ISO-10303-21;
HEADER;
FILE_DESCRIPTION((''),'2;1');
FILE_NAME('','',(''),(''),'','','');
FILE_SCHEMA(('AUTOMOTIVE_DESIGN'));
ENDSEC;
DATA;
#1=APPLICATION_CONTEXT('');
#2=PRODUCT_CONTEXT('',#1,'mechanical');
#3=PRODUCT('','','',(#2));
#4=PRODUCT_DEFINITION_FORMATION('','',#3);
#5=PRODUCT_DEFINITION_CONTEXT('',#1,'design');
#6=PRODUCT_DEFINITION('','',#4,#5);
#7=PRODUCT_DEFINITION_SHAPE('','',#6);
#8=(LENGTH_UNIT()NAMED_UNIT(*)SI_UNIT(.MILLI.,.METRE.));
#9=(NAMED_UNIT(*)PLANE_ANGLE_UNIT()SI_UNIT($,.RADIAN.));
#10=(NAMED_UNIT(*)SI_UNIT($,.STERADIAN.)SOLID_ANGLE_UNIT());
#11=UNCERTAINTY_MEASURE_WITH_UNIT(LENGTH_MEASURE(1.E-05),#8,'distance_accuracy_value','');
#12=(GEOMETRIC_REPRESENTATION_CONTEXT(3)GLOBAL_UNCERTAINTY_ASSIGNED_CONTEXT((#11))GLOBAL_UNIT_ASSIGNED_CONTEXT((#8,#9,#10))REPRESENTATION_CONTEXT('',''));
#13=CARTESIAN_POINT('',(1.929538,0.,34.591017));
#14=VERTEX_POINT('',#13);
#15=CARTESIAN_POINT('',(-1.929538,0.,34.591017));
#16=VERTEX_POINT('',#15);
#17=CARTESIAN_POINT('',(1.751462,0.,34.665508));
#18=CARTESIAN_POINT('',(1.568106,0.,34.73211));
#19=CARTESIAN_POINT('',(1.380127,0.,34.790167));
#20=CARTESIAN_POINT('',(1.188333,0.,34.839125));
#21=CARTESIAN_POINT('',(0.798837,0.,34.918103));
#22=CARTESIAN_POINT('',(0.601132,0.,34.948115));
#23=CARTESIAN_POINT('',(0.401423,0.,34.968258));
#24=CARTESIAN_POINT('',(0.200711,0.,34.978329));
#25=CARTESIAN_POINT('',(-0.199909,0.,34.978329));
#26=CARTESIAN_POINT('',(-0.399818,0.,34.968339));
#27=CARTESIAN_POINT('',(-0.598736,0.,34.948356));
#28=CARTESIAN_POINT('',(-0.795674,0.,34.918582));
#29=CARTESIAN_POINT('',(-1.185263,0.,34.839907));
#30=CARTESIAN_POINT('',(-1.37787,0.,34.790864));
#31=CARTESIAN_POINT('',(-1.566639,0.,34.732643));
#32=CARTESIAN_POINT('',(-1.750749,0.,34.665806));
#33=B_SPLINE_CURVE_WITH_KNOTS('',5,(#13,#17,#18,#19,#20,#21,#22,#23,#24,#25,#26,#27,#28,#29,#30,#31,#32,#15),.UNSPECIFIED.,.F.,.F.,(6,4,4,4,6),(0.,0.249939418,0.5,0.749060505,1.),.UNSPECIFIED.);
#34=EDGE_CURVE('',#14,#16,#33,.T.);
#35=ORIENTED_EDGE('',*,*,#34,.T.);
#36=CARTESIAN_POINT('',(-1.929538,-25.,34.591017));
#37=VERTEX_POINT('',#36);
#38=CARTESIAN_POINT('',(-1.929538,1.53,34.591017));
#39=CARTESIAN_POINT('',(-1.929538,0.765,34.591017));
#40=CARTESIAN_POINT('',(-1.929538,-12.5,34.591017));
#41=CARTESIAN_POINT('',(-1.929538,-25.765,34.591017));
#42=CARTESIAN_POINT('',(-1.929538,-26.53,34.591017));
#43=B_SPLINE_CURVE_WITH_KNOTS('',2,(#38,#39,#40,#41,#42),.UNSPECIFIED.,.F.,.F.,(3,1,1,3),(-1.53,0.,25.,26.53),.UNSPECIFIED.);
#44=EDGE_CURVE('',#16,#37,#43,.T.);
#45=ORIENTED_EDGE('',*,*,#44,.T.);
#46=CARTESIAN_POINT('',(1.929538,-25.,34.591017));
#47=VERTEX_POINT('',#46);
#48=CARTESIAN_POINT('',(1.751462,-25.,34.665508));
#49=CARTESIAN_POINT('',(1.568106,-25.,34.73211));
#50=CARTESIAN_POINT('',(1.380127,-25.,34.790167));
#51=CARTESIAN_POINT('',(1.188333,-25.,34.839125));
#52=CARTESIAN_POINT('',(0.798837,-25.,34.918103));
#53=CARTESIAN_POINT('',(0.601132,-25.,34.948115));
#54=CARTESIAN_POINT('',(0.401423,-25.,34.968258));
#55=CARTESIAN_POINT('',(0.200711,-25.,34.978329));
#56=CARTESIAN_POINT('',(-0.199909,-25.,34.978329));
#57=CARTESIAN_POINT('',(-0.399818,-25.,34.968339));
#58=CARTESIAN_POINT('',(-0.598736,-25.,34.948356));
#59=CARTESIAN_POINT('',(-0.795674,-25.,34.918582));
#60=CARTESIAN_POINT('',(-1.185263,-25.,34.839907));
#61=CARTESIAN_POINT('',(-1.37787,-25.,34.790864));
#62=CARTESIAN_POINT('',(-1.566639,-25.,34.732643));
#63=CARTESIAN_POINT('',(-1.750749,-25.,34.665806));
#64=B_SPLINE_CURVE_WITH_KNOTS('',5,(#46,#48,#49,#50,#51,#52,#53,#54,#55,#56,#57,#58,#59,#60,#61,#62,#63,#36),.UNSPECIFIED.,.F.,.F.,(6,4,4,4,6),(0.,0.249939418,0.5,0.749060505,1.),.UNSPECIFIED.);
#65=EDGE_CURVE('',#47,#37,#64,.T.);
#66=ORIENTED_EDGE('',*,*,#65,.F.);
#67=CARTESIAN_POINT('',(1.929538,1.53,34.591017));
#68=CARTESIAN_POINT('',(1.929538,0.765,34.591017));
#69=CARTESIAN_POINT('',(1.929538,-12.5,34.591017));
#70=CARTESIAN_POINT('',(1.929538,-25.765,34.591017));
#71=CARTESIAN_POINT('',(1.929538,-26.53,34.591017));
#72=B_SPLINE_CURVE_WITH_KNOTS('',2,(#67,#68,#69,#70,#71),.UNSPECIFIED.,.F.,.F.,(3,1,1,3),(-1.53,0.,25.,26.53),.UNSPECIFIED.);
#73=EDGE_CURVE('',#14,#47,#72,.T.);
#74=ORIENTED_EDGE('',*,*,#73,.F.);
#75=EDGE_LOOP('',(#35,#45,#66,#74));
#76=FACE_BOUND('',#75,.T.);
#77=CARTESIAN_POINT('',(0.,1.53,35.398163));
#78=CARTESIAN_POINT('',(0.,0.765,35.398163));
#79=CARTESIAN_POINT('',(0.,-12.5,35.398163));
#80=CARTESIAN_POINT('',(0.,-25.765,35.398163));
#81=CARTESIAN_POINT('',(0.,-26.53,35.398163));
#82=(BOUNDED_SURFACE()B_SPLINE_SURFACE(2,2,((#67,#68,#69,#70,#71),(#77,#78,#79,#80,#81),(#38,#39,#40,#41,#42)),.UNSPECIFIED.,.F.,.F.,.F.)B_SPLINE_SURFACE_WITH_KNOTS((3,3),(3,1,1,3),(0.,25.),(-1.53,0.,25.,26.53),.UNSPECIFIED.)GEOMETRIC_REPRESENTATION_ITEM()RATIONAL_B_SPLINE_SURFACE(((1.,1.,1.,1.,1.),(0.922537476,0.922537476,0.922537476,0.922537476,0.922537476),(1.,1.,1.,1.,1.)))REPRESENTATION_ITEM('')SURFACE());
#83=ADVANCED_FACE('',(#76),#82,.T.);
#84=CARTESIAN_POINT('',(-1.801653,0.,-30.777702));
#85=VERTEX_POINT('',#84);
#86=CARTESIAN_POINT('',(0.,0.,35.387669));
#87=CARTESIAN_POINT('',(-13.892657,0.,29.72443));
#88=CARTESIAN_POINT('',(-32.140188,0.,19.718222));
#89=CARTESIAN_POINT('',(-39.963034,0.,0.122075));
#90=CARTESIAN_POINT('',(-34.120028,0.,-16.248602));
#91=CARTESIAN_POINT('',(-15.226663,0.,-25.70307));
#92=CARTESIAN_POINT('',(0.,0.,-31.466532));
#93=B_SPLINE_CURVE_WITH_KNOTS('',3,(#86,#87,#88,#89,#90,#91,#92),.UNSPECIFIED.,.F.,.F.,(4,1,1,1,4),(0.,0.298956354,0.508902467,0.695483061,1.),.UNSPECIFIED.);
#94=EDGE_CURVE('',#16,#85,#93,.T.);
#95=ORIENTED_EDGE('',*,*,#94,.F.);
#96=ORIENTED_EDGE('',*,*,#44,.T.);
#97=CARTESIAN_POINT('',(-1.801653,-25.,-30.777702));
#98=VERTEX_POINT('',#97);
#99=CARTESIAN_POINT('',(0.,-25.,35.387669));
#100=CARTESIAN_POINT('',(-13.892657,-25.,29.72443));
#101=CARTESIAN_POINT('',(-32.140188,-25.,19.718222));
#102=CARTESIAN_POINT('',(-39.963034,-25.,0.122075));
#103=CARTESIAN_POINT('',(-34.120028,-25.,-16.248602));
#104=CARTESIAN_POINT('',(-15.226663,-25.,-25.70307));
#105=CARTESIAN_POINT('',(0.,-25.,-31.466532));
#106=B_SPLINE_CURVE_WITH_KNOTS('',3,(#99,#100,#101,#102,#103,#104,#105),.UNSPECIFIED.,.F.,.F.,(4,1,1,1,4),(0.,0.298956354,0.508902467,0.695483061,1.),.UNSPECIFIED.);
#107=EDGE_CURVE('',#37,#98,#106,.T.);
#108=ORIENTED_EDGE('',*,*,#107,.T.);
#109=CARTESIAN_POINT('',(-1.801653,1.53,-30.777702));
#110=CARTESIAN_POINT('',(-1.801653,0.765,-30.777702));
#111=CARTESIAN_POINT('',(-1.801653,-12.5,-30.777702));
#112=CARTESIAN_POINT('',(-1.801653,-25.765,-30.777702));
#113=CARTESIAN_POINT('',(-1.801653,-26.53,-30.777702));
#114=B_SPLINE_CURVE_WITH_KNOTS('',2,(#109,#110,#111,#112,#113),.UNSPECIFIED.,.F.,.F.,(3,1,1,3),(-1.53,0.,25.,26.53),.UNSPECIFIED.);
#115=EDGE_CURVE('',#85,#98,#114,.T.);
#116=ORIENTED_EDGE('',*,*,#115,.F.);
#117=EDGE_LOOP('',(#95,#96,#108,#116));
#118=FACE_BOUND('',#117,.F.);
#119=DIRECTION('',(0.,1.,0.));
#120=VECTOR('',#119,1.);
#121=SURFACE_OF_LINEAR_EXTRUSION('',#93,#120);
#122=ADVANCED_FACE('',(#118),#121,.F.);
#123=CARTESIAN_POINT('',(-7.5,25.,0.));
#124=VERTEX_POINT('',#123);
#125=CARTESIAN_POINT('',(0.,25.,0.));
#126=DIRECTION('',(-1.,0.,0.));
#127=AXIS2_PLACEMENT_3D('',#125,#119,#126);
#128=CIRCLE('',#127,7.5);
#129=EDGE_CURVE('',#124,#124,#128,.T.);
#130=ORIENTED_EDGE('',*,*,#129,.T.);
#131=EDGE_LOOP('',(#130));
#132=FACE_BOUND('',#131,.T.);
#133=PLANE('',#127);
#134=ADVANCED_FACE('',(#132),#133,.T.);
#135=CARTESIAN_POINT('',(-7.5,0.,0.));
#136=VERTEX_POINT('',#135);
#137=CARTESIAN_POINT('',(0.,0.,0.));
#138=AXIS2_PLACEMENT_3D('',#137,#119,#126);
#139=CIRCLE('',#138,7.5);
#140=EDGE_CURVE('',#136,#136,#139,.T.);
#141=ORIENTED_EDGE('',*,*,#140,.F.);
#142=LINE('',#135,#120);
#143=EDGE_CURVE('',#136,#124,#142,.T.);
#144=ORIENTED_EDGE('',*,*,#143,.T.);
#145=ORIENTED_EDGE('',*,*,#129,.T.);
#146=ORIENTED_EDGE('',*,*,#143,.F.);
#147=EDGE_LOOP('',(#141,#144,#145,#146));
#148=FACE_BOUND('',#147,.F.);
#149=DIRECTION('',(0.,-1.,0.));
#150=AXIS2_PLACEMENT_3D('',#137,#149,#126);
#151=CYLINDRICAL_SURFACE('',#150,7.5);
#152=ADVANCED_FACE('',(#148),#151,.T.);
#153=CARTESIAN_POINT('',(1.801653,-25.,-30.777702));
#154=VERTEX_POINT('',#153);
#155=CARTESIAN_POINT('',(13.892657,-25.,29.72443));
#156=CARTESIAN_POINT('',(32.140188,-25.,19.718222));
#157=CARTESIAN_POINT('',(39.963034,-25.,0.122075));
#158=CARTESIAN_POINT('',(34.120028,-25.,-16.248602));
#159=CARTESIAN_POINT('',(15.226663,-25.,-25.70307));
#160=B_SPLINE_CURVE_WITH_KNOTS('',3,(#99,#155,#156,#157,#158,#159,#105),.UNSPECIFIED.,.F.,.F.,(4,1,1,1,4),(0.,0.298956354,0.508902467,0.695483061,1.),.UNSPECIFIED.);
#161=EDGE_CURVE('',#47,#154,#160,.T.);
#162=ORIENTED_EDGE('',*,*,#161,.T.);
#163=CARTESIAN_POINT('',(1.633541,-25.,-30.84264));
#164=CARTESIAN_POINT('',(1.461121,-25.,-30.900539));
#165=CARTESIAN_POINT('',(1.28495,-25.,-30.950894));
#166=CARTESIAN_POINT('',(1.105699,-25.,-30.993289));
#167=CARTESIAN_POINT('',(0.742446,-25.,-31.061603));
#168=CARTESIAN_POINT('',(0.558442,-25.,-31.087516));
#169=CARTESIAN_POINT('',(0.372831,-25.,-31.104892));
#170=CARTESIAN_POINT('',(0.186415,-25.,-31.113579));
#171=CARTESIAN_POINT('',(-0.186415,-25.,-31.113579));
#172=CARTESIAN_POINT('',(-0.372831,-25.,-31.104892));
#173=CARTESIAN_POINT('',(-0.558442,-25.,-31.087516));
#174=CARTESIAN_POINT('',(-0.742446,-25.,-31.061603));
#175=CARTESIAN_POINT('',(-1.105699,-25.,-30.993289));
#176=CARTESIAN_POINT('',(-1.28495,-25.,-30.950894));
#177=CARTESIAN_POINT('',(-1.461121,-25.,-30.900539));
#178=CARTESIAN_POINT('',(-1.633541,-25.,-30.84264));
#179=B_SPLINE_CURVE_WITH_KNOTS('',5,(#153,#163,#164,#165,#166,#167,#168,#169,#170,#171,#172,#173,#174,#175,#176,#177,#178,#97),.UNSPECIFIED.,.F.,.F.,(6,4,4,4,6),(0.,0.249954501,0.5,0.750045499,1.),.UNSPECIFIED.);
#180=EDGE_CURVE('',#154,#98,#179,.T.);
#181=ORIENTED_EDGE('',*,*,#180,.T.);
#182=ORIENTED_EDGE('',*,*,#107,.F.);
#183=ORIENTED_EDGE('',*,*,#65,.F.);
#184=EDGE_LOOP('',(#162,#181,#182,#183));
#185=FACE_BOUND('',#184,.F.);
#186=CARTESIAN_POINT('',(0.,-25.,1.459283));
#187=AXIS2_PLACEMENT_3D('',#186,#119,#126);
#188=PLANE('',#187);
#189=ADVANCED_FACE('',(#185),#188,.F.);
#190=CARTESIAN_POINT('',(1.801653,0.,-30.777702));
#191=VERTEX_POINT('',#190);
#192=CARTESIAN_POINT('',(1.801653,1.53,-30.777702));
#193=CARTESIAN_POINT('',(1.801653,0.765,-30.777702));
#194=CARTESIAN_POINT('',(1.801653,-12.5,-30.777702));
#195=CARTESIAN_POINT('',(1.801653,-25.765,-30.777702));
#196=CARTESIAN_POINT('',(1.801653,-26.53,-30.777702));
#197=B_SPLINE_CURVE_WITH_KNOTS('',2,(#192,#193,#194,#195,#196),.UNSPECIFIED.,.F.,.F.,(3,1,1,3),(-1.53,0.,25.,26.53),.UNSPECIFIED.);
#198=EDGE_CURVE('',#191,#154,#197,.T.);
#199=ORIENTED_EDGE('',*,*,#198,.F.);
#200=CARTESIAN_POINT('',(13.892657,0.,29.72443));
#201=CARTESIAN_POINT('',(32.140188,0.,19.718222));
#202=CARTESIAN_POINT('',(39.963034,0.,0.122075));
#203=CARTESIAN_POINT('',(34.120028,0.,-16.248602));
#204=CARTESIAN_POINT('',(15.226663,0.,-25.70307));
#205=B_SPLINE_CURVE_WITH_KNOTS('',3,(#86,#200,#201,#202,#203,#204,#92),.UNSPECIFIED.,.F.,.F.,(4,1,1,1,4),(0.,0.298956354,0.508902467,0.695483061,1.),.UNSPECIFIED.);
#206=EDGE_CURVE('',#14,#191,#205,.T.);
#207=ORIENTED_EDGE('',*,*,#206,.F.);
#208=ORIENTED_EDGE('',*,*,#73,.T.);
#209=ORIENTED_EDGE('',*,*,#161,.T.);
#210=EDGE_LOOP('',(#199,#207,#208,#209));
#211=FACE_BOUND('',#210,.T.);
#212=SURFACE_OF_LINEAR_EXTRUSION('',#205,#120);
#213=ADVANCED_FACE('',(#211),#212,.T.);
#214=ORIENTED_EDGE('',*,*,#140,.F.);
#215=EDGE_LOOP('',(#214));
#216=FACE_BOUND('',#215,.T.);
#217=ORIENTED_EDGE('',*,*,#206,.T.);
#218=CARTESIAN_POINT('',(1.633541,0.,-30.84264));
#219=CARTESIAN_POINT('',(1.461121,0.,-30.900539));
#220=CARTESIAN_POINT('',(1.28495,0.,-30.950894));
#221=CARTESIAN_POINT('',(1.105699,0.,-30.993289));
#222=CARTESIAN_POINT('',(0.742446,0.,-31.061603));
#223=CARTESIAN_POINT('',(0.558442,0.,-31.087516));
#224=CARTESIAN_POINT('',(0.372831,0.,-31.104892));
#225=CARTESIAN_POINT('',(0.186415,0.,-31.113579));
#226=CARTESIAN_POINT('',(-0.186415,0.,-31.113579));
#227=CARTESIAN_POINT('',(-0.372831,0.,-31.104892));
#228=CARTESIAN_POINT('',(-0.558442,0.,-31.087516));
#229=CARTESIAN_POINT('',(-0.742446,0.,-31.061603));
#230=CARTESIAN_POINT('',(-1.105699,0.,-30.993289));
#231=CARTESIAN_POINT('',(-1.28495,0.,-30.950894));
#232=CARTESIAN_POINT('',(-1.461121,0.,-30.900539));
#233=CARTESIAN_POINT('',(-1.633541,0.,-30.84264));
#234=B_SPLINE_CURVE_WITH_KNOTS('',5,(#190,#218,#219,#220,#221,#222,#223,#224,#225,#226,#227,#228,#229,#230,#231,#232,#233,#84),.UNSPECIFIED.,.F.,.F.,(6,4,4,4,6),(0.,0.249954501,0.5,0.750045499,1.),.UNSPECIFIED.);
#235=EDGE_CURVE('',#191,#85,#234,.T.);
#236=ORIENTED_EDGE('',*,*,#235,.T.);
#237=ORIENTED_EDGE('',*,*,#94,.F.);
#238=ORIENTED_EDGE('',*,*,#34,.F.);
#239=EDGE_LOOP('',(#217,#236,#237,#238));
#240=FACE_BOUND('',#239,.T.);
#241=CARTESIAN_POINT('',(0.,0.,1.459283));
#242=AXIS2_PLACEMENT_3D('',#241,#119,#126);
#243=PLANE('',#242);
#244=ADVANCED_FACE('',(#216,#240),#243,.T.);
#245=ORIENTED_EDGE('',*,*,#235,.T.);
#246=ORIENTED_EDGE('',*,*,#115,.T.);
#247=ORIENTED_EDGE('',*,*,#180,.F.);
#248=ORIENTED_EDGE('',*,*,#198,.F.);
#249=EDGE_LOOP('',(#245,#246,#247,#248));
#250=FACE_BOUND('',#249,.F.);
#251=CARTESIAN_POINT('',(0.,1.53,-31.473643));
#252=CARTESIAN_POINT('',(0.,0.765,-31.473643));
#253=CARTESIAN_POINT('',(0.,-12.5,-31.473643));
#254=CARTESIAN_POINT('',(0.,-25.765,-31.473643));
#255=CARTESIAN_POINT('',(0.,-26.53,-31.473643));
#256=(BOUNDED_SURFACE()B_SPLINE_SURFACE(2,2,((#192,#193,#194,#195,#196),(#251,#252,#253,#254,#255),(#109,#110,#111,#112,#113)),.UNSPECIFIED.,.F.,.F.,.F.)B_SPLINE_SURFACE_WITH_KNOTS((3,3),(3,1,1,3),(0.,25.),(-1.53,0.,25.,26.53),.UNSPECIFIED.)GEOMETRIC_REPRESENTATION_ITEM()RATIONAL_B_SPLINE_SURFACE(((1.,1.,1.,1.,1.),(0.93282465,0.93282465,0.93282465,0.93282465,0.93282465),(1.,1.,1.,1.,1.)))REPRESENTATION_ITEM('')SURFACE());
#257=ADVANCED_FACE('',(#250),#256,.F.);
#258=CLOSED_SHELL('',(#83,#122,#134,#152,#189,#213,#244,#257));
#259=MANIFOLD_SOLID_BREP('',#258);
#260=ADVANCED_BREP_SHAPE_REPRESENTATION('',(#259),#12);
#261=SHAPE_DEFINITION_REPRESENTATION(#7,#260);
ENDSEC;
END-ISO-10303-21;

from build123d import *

# Parameters (mm, degrees)
F1_DEPTH = 25
F2_R     = 7.5
F3_DEPTH = 25
F4_R     = 5


with BuildPart() as f1:
    # F0 (on Front) → F1 (new body)
    with BuildSketch(Plane.XZ):
        with BuildLine():
            add(Edge.make_bspline(
                [(0, 35.3876687586), (13.8926569286, 29.7244304014), (32.1401882045, 19.7182221568), (39.9630337201, 0.1220754807), (34.1200278266, -16.2486022664), (15.2266629868, -25.7030703609), (0, -31.4665324986)],
                knots=[0, 0, 0, 0, 0.2989563536, 0.5089024667, 0.6954830611, 1, 1, 1, 1], degree=3))
            add(Edge.make_bspline(
                [(0, 35.3876687586), (-13.8926569286, 29.7244304014), (-32.1401882045, 19.7182221568), (-39.9630337201, 0.1220754807), (-34.1200278266, -16.2486022664), (-15.2266629868, -25.7030703609), (0, -31.4665324986)],
                knots=[0, 0, 0, 0, 0.2989563536, 0.5089024667, 0.6954830611, 1, 1, 1, 1], degree=3))
        make_face()
    extrude(amount=F1_DEPTH)

    # F2 (on face) → F3 (join)
    with BuildSketch(Plane(origin=(0, 0, 0), x_dir=(-1, 0, 0), z_dir=(0, 1, 0))):
        Circle(F2_R)
    extrude(amount=F3_DEPTH)

    # F4
    f4_edges = [f1.edges().sort_by_distance(p)[0] for p in [
        (0, -12.5, 35.387669),
        (0, -12.5, -31.466532),
    ]]
    fillet(f4_edges, radius=F4_R)


solid = f1.part
